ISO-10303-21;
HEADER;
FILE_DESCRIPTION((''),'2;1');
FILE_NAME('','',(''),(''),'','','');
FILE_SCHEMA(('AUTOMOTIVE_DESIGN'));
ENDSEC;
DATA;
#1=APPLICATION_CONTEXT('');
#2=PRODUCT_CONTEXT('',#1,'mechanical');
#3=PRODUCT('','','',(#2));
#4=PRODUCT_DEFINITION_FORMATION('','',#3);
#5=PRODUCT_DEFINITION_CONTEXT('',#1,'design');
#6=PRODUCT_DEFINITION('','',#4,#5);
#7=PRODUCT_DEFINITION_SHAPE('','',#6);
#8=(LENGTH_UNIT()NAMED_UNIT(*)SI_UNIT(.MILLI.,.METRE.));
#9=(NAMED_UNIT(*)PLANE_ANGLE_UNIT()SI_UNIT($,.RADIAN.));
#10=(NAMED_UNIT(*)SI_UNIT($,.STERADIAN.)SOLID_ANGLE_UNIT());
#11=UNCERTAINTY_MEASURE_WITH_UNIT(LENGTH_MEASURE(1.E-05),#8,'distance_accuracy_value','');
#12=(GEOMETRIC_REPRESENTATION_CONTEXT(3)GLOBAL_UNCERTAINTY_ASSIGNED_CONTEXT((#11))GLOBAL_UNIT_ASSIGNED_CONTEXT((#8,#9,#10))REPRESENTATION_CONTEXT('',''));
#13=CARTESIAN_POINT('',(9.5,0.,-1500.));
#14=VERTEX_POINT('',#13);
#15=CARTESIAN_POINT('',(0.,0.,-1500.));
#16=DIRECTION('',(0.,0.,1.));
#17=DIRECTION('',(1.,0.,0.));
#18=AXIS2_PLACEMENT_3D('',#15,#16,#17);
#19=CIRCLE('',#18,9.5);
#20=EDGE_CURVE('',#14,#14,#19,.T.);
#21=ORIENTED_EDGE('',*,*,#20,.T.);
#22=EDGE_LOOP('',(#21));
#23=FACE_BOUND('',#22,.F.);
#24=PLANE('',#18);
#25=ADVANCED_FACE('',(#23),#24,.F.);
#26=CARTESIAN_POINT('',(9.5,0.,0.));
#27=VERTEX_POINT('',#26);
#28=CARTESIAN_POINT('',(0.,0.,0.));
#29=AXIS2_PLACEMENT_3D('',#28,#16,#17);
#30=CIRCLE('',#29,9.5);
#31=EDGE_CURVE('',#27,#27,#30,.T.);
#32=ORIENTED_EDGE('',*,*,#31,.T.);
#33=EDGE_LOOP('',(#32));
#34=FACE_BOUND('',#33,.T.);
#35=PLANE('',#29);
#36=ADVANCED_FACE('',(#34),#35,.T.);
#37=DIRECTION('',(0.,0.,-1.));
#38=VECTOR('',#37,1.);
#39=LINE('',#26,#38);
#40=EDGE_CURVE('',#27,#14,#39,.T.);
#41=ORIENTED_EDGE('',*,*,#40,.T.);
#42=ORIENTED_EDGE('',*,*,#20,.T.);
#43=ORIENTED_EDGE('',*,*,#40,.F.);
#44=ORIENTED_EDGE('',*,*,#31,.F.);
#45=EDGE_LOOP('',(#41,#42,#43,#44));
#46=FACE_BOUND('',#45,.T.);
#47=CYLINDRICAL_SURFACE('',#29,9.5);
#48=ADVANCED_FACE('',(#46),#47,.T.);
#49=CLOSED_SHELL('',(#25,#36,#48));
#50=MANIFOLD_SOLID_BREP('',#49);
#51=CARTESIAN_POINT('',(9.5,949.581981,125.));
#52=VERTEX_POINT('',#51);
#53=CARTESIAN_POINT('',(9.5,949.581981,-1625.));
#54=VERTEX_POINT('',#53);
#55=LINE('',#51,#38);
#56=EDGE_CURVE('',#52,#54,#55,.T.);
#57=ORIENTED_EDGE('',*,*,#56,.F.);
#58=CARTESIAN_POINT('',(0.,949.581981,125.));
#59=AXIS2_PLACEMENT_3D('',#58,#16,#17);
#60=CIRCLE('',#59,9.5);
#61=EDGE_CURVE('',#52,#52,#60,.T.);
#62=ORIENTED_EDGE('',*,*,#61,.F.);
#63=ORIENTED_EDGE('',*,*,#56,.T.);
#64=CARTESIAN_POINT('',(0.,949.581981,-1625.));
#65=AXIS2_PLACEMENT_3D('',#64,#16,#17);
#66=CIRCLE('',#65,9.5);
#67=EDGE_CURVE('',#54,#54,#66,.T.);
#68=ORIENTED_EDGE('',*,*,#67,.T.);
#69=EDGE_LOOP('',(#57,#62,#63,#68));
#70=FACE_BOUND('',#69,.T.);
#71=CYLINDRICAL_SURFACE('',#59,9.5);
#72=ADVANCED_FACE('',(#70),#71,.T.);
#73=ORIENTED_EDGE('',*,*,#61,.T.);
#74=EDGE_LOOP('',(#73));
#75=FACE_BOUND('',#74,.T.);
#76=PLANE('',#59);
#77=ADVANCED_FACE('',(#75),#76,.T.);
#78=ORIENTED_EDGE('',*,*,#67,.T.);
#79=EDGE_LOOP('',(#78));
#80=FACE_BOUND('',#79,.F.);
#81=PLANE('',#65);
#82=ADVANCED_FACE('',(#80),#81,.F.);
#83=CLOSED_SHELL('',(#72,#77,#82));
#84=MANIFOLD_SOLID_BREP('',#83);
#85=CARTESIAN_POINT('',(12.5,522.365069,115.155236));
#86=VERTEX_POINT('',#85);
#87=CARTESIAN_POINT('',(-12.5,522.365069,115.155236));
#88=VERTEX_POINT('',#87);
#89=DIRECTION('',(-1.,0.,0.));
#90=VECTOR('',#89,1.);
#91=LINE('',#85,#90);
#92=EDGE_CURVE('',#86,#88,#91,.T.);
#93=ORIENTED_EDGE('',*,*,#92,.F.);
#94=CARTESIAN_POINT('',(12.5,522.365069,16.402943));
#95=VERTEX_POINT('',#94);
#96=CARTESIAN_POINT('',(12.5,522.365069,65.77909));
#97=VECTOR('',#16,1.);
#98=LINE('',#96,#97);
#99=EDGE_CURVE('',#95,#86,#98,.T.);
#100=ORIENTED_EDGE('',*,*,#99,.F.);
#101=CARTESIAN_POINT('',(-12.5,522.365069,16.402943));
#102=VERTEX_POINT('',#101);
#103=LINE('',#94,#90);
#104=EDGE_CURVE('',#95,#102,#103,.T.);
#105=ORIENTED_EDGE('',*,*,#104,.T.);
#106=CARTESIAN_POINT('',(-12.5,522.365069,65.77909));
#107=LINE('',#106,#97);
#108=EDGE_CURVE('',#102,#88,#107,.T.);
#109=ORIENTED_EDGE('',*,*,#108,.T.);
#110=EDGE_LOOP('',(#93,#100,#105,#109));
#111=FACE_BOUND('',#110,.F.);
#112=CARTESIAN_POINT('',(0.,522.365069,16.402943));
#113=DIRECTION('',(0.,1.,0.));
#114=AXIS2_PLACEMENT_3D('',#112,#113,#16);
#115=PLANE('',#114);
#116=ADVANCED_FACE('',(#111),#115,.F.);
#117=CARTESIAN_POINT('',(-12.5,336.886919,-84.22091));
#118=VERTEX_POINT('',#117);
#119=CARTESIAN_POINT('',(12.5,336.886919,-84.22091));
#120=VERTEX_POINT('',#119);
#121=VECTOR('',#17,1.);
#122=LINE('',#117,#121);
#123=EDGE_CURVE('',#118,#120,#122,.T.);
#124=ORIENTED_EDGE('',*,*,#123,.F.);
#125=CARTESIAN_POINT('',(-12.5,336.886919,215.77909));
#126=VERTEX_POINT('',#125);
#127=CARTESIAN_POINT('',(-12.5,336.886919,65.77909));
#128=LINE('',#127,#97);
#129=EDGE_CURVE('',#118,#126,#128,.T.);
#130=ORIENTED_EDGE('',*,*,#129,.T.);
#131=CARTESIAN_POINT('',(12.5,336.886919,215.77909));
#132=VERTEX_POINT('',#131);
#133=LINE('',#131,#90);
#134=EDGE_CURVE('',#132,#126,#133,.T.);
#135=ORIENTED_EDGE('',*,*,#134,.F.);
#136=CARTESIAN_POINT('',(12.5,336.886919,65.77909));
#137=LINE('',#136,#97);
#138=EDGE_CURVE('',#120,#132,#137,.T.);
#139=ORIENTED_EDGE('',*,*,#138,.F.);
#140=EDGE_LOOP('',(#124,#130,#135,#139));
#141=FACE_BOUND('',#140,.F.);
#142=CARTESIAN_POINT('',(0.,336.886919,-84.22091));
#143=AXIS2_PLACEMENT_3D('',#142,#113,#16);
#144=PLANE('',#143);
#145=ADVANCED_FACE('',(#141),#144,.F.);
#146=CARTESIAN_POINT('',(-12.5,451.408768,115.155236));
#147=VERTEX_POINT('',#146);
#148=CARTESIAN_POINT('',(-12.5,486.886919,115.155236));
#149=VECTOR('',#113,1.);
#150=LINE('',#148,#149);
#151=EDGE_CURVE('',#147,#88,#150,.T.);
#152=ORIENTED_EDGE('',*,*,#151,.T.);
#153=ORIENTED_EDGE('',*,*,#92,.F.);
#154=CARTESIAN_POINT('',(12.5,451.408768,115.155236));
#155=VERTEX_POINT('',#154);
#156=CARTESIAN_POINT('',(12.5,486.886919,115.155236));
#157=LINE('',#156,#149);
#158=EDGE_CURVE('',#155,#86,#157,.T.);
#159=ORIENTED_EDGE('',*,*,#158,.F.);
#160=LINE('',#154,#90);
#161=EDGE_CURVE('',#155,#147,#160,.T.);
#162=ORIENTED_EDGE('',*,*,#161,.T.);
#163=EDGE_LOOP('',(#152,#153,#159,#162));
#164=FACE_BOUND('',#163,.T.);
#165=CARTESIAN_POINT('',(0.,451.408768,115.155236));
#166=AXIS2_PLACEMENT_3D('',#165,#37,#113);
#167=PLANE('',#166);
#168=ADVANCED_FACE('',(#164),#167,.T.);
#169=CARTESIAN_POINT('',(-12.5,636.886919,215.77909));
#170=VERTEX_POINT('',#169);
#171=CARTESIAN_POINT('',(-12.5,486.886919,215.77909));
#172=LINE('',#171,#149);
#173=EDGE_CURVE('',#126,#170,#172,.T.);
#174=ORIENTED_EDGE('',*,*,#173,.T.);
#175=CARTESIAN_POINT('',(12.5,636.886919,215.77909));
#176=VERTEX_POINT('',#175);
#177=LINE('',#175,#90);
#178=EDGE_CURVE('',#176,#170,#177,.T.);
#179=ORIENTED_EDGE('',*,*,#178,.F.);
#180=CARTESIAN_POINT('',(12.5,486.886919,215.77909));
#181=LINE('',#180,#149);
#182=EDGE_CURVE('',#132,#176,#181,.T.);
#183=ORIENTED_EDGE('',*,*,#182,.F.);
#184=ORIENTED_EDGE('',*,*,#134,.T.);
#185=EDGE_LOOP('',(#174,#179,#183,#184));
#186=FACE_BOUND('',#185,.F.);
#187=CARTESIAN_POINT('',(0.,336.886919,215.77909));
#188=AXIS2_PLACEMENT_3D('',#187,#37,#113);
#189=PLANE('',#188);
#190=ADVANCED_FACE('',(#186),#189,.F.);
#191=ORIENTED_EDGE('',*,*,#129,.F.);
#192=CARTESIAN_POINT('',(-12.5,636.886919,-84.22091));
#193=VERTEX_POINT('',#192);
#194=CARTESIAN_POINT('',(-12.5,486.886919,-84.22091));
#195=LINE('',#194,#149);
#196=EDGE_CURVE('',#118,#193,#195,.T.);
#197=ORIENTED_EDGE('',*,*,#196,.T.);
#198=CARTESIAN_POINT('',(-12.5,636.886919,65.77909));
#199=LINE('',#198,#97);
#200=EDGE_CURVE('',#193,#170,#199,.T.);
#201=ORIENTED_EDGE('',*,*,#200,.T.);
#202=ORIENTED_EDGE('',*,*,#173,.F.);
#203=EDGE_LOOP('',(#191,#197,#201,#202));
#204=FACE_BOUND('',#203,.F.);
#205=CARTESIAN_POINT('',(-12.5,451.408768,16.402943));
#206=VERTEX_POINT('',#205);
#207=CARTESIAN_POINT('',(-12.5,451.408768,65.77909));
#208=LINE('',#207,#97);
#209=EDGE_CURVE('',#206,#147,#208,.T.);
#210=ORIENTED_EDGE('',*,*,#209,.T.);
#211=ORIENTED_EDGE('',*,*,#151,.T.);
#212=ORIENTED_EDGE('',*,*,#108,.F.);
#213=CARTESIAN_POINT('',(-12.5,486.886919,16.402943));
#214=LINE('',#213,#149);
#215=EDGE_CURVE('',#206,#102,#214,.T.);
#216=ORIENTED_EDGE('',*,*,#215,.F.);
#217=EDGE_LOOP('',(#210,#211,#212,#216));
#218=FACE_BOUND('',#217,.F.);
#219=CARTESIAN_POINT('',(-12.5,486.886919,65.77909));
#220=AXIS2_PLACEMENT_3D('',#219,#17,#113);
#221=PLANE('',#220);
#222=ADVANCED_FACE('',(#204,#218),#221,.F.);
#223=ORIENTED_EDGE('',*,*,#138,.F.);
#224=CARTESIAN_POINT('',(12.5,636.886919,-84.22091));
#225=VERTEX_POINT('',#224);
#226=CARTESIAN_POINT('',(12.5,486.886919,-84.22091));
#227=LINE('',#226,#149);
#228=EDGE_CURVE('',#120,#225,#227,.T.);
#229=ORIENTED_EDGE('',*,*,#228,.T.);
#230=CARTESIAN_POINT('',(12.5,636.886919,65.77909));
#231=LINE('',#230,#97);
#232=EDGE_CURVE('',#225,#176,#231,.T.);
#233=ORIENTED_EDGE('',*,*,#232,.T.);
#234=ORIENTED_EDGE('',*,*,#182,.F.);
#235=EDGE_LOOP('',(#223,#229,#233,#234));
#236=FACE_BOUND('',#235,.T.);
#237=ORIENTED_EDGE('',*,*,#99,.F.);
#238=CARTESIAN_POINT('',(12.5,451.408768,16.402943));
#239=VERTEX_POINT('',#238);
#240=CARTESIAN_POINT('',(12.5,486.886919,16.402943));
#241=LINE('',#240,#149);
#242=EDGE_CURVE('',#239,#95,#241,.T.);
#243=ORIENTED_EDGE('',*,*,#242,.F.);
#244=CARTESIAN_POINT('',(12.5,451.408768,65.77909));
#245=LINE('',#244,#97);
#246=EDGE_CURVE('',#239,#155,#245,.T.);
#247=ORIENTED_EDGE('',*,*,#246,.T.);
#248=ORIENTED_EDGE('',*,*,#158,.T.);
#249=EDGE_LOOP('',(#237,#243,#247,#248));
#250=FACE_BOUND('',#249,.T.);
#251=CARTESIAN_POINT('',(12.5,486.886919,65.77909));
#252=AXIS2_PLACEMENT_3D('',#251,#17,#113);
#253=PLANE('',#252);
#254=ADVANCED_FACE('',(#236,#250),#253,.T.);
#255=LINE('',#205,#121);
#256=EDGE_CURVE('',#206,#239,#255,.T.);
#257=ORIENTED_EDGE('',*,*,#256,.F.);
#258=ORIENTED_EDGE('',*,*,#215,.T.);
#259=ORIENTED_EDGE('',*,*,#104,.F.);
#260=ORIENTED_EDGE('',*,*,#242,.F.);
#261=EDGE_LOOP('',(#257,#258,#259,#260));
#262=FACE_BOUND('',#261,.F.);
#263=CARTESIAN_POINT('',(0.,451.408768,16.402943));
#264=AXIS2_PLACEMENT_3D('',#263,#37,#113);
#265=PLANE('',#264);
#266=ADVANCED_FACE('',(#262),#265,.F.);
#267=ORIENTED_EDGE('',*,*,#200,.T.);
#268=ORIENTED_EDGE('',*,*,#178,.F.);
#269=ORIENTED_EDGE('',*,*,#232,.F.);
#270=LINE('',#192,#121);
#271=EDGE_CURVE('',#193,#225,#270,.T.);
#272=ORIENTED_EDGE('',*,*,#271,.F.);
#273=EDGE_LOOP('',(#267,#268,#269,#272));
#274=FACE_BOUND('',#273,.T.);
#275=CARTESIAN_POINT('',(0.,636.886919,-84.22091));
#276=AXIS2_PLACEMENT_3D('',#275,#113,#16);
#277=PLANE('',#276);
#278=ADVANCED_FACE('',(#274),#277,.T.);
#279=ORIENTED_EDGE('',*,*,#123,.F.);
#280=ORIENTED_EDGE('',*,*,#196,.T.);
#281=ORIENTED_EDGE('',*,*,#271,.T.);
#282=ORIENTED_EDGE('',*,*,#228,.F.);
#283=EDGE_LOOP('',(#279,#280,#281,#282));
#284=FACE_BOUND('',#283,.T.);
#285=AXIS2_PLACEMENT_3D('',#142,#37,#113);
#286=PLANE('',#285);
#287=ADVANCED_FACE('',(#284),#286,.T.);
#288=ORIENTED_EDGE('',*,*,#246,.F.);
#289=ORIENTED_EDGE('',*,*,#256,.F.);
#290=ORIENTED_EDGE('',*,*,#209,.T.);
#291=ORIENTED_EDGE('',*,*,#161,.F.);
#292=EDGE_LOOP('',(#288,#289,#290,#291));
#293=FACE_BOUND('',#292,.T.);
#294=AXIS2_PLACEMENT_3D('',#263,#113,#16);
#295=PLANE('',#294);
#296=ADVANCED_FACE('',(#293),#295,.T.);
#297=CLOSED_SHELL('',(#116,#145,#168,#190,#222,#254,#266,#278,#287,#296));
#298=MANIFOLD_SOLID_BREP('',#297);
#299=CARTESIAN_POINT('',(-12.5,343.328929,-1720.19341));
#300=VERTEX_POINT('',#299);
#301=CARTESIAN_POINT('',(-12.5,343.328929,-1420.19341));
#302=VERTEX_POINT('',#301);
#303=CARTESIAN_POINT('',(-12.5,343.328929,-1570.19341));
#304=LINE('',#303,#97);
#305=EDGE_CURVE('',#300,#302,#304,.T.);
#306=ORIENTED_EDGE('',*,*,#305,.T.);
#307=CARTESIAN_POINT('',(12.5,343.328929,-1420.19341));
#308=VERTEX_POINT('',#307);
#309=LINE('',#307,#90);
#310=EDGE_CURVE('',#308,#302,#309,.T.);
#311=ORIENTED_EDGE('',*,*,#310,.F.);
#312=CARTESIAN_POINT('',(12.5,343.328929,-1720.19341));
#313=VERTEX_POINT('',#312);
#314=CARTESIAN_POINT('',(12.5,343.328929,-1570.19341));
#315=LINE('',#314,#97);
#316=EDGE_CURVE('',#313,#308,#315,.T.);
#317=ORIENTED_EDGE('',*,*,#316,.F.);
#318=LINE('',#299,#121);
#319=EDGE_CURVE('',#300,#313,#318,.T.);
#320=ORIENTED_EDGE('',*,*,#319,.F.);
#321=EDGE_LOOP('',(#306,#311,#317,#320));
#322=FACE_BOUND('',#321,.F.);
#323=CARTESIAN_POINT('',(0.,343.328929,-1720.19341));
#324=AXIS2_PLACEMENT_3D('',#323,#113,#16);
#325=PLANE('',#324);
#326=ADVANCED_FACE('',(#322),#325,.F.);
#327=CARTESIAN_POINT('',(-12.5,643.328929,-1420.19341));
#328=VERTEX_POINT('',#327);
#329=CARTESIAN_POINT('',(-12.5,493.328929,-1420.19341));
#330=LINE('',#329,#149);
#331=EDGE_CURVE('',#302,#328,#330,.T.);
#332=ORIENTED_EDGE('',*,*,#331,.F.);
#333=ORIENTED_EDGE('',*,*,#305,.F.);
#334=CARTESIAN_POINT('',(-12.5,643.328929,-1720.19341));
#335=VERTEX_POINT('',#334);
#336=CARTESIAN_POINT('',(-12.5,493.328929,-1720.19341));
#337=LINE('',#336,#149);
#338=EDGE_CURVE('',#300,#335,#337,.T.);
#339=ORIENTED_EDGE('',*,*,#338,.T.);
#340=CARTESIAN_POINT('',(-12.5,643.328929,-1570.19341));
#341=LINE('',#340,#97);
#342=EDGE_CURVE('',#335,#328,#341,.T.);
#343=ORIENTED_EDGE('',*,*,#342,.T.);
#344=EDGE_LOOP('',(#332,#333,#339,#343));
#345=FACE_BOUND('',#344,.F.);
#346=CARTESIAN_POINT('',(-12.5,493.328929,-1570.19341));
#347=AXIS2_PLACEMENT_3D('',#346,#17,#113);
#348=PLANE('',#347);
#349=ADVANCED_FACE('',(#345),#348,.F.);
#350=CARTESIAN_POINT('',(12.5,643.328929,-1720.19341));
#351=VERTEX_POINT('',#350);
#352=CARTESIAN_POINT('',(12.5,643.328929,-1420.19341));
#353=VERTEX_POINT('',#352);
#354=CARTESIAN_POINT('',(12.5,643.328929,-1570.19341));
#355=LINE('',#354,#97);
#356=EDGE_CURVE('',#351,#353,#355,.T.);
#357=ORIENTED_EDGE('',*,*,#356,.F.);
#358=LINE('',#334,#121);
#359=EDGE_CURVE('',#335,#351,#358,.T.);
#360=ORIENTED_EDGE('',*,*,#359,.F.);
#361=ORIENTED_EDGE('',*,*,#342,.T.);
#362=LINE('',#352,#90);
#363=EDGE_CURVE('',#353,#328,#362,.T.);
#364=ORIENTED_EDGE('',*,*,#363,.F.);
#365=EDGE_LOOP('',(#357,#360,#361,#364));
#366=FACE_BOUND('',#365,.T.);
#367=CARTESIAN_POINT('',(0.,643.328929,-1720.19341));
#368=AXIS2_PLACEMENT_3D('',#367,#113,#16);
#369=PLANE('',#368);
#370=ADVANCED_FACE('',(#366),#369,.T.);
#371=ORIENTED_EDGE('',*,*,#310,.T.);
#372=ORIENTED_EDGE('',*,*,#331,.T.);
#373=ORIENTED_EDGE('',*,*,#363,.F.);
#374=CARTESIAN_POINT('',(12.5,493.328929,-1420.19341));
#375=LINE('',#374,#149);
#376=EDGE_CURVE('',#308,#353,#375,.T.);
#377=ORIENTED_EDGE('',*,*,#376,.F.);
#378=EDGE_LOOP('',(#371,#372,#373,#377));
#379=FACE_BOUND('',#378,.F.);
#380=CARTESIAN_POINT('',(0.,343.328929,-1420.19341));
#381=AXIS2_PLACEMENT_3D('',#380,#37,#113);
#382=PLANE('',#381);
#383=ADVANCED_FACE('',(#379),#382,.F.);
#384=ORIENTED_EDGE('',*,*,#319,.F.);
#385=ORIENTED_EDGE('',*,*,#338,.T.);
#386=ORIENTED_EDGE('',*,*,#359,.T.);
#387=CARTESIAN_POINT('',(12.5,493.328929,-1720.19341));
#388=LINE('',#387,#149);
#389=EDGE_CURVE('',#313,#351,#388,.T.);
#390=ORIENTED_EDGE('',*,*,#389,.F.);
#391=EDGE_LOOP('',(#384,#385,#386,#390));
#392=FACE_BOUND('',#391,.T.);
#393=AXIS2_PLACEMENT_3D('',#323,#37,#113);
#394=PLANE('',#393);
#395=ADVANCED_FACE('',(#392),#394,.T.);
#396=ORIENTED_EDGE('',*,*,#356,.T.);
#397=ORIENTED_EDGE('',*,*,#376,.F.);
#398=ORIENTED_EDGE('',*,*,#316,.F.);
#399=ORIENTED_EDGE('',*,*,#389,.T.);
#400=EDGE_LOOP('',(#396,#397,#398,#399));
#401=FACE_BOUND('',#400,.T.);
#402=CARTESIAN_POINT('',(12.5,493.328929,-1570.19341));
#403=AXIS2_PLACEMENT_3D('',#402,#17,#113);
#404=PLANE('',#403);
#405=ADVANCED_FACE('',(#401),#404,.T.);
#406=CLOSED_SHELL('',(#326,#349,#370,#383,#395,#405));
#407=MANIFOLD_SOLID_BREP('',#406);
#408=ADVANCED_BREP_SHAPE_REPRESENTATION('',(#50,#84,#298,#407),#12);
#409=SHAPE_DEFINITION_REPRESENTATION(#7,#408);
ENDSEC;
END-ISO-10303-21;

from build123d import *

# Parameters (mm, degrees)
F2_R      = 9.5
F3_DEPTH  = 1500
F9_R      = 9.5
F10_DEPTH = 1750
F13_W     = 300
F13_H     = 300
F13_W_2   = 70.9563016891
F13_H_2   = 98.7522929907
F14_DEPTH = 12.5
F15_W     = 300
F15_H     = 300
F16_DEPTH = 12.5


# Not quite as in the source:
# - the program builds the solid bodies; features that only make, move or delete a surface that nothing else refers to are left out


with BuildPart() as f3:
    # F2 (on Top) → F3 (new body)
    with BuildSketch(Plane.XY):
        Circle(F2_R)
    extrude(amount=-F3_DEPTH)


with BuildPart() as f10:
    # F9 (on offset) → F10 (new body)
    with BuildSketch(Plane.XY.offset(125)):
        with Locations((0, 949.5819807053)):
            Circle(F9_R)
    extrude(amount=-F10_DEPTH)


with BuildPart() as f14:
    # F13 (on Right) → F14 (new body, symmetric)
    with BuildSketch(Plane.YZ):
        with Locations((486.8869185448, 65.7790899277)):
            Rectangle(F13_W, F13_H)
        with Locations((486.8869185448, 65.7790899277)):
            Rectangle(F13_W_2, F13_H_2, mode=Mode.SUBTRACT)
    extrude(amount=F14_DEPTH, both=True)


with BuildPart() as f16:
    # F15 (on Right) → F16 (new body, symmetric)
    with BuildSketch(Plane.YZ):
        with Locations((493.3289289474, -1570.1934099197)):
            Rectangle(F15_W, F15_H)
    extrude(amount=F16_DEPTH, both=True)


solid = Compound([f3.part, f10.part, f14.part, f16.part])
